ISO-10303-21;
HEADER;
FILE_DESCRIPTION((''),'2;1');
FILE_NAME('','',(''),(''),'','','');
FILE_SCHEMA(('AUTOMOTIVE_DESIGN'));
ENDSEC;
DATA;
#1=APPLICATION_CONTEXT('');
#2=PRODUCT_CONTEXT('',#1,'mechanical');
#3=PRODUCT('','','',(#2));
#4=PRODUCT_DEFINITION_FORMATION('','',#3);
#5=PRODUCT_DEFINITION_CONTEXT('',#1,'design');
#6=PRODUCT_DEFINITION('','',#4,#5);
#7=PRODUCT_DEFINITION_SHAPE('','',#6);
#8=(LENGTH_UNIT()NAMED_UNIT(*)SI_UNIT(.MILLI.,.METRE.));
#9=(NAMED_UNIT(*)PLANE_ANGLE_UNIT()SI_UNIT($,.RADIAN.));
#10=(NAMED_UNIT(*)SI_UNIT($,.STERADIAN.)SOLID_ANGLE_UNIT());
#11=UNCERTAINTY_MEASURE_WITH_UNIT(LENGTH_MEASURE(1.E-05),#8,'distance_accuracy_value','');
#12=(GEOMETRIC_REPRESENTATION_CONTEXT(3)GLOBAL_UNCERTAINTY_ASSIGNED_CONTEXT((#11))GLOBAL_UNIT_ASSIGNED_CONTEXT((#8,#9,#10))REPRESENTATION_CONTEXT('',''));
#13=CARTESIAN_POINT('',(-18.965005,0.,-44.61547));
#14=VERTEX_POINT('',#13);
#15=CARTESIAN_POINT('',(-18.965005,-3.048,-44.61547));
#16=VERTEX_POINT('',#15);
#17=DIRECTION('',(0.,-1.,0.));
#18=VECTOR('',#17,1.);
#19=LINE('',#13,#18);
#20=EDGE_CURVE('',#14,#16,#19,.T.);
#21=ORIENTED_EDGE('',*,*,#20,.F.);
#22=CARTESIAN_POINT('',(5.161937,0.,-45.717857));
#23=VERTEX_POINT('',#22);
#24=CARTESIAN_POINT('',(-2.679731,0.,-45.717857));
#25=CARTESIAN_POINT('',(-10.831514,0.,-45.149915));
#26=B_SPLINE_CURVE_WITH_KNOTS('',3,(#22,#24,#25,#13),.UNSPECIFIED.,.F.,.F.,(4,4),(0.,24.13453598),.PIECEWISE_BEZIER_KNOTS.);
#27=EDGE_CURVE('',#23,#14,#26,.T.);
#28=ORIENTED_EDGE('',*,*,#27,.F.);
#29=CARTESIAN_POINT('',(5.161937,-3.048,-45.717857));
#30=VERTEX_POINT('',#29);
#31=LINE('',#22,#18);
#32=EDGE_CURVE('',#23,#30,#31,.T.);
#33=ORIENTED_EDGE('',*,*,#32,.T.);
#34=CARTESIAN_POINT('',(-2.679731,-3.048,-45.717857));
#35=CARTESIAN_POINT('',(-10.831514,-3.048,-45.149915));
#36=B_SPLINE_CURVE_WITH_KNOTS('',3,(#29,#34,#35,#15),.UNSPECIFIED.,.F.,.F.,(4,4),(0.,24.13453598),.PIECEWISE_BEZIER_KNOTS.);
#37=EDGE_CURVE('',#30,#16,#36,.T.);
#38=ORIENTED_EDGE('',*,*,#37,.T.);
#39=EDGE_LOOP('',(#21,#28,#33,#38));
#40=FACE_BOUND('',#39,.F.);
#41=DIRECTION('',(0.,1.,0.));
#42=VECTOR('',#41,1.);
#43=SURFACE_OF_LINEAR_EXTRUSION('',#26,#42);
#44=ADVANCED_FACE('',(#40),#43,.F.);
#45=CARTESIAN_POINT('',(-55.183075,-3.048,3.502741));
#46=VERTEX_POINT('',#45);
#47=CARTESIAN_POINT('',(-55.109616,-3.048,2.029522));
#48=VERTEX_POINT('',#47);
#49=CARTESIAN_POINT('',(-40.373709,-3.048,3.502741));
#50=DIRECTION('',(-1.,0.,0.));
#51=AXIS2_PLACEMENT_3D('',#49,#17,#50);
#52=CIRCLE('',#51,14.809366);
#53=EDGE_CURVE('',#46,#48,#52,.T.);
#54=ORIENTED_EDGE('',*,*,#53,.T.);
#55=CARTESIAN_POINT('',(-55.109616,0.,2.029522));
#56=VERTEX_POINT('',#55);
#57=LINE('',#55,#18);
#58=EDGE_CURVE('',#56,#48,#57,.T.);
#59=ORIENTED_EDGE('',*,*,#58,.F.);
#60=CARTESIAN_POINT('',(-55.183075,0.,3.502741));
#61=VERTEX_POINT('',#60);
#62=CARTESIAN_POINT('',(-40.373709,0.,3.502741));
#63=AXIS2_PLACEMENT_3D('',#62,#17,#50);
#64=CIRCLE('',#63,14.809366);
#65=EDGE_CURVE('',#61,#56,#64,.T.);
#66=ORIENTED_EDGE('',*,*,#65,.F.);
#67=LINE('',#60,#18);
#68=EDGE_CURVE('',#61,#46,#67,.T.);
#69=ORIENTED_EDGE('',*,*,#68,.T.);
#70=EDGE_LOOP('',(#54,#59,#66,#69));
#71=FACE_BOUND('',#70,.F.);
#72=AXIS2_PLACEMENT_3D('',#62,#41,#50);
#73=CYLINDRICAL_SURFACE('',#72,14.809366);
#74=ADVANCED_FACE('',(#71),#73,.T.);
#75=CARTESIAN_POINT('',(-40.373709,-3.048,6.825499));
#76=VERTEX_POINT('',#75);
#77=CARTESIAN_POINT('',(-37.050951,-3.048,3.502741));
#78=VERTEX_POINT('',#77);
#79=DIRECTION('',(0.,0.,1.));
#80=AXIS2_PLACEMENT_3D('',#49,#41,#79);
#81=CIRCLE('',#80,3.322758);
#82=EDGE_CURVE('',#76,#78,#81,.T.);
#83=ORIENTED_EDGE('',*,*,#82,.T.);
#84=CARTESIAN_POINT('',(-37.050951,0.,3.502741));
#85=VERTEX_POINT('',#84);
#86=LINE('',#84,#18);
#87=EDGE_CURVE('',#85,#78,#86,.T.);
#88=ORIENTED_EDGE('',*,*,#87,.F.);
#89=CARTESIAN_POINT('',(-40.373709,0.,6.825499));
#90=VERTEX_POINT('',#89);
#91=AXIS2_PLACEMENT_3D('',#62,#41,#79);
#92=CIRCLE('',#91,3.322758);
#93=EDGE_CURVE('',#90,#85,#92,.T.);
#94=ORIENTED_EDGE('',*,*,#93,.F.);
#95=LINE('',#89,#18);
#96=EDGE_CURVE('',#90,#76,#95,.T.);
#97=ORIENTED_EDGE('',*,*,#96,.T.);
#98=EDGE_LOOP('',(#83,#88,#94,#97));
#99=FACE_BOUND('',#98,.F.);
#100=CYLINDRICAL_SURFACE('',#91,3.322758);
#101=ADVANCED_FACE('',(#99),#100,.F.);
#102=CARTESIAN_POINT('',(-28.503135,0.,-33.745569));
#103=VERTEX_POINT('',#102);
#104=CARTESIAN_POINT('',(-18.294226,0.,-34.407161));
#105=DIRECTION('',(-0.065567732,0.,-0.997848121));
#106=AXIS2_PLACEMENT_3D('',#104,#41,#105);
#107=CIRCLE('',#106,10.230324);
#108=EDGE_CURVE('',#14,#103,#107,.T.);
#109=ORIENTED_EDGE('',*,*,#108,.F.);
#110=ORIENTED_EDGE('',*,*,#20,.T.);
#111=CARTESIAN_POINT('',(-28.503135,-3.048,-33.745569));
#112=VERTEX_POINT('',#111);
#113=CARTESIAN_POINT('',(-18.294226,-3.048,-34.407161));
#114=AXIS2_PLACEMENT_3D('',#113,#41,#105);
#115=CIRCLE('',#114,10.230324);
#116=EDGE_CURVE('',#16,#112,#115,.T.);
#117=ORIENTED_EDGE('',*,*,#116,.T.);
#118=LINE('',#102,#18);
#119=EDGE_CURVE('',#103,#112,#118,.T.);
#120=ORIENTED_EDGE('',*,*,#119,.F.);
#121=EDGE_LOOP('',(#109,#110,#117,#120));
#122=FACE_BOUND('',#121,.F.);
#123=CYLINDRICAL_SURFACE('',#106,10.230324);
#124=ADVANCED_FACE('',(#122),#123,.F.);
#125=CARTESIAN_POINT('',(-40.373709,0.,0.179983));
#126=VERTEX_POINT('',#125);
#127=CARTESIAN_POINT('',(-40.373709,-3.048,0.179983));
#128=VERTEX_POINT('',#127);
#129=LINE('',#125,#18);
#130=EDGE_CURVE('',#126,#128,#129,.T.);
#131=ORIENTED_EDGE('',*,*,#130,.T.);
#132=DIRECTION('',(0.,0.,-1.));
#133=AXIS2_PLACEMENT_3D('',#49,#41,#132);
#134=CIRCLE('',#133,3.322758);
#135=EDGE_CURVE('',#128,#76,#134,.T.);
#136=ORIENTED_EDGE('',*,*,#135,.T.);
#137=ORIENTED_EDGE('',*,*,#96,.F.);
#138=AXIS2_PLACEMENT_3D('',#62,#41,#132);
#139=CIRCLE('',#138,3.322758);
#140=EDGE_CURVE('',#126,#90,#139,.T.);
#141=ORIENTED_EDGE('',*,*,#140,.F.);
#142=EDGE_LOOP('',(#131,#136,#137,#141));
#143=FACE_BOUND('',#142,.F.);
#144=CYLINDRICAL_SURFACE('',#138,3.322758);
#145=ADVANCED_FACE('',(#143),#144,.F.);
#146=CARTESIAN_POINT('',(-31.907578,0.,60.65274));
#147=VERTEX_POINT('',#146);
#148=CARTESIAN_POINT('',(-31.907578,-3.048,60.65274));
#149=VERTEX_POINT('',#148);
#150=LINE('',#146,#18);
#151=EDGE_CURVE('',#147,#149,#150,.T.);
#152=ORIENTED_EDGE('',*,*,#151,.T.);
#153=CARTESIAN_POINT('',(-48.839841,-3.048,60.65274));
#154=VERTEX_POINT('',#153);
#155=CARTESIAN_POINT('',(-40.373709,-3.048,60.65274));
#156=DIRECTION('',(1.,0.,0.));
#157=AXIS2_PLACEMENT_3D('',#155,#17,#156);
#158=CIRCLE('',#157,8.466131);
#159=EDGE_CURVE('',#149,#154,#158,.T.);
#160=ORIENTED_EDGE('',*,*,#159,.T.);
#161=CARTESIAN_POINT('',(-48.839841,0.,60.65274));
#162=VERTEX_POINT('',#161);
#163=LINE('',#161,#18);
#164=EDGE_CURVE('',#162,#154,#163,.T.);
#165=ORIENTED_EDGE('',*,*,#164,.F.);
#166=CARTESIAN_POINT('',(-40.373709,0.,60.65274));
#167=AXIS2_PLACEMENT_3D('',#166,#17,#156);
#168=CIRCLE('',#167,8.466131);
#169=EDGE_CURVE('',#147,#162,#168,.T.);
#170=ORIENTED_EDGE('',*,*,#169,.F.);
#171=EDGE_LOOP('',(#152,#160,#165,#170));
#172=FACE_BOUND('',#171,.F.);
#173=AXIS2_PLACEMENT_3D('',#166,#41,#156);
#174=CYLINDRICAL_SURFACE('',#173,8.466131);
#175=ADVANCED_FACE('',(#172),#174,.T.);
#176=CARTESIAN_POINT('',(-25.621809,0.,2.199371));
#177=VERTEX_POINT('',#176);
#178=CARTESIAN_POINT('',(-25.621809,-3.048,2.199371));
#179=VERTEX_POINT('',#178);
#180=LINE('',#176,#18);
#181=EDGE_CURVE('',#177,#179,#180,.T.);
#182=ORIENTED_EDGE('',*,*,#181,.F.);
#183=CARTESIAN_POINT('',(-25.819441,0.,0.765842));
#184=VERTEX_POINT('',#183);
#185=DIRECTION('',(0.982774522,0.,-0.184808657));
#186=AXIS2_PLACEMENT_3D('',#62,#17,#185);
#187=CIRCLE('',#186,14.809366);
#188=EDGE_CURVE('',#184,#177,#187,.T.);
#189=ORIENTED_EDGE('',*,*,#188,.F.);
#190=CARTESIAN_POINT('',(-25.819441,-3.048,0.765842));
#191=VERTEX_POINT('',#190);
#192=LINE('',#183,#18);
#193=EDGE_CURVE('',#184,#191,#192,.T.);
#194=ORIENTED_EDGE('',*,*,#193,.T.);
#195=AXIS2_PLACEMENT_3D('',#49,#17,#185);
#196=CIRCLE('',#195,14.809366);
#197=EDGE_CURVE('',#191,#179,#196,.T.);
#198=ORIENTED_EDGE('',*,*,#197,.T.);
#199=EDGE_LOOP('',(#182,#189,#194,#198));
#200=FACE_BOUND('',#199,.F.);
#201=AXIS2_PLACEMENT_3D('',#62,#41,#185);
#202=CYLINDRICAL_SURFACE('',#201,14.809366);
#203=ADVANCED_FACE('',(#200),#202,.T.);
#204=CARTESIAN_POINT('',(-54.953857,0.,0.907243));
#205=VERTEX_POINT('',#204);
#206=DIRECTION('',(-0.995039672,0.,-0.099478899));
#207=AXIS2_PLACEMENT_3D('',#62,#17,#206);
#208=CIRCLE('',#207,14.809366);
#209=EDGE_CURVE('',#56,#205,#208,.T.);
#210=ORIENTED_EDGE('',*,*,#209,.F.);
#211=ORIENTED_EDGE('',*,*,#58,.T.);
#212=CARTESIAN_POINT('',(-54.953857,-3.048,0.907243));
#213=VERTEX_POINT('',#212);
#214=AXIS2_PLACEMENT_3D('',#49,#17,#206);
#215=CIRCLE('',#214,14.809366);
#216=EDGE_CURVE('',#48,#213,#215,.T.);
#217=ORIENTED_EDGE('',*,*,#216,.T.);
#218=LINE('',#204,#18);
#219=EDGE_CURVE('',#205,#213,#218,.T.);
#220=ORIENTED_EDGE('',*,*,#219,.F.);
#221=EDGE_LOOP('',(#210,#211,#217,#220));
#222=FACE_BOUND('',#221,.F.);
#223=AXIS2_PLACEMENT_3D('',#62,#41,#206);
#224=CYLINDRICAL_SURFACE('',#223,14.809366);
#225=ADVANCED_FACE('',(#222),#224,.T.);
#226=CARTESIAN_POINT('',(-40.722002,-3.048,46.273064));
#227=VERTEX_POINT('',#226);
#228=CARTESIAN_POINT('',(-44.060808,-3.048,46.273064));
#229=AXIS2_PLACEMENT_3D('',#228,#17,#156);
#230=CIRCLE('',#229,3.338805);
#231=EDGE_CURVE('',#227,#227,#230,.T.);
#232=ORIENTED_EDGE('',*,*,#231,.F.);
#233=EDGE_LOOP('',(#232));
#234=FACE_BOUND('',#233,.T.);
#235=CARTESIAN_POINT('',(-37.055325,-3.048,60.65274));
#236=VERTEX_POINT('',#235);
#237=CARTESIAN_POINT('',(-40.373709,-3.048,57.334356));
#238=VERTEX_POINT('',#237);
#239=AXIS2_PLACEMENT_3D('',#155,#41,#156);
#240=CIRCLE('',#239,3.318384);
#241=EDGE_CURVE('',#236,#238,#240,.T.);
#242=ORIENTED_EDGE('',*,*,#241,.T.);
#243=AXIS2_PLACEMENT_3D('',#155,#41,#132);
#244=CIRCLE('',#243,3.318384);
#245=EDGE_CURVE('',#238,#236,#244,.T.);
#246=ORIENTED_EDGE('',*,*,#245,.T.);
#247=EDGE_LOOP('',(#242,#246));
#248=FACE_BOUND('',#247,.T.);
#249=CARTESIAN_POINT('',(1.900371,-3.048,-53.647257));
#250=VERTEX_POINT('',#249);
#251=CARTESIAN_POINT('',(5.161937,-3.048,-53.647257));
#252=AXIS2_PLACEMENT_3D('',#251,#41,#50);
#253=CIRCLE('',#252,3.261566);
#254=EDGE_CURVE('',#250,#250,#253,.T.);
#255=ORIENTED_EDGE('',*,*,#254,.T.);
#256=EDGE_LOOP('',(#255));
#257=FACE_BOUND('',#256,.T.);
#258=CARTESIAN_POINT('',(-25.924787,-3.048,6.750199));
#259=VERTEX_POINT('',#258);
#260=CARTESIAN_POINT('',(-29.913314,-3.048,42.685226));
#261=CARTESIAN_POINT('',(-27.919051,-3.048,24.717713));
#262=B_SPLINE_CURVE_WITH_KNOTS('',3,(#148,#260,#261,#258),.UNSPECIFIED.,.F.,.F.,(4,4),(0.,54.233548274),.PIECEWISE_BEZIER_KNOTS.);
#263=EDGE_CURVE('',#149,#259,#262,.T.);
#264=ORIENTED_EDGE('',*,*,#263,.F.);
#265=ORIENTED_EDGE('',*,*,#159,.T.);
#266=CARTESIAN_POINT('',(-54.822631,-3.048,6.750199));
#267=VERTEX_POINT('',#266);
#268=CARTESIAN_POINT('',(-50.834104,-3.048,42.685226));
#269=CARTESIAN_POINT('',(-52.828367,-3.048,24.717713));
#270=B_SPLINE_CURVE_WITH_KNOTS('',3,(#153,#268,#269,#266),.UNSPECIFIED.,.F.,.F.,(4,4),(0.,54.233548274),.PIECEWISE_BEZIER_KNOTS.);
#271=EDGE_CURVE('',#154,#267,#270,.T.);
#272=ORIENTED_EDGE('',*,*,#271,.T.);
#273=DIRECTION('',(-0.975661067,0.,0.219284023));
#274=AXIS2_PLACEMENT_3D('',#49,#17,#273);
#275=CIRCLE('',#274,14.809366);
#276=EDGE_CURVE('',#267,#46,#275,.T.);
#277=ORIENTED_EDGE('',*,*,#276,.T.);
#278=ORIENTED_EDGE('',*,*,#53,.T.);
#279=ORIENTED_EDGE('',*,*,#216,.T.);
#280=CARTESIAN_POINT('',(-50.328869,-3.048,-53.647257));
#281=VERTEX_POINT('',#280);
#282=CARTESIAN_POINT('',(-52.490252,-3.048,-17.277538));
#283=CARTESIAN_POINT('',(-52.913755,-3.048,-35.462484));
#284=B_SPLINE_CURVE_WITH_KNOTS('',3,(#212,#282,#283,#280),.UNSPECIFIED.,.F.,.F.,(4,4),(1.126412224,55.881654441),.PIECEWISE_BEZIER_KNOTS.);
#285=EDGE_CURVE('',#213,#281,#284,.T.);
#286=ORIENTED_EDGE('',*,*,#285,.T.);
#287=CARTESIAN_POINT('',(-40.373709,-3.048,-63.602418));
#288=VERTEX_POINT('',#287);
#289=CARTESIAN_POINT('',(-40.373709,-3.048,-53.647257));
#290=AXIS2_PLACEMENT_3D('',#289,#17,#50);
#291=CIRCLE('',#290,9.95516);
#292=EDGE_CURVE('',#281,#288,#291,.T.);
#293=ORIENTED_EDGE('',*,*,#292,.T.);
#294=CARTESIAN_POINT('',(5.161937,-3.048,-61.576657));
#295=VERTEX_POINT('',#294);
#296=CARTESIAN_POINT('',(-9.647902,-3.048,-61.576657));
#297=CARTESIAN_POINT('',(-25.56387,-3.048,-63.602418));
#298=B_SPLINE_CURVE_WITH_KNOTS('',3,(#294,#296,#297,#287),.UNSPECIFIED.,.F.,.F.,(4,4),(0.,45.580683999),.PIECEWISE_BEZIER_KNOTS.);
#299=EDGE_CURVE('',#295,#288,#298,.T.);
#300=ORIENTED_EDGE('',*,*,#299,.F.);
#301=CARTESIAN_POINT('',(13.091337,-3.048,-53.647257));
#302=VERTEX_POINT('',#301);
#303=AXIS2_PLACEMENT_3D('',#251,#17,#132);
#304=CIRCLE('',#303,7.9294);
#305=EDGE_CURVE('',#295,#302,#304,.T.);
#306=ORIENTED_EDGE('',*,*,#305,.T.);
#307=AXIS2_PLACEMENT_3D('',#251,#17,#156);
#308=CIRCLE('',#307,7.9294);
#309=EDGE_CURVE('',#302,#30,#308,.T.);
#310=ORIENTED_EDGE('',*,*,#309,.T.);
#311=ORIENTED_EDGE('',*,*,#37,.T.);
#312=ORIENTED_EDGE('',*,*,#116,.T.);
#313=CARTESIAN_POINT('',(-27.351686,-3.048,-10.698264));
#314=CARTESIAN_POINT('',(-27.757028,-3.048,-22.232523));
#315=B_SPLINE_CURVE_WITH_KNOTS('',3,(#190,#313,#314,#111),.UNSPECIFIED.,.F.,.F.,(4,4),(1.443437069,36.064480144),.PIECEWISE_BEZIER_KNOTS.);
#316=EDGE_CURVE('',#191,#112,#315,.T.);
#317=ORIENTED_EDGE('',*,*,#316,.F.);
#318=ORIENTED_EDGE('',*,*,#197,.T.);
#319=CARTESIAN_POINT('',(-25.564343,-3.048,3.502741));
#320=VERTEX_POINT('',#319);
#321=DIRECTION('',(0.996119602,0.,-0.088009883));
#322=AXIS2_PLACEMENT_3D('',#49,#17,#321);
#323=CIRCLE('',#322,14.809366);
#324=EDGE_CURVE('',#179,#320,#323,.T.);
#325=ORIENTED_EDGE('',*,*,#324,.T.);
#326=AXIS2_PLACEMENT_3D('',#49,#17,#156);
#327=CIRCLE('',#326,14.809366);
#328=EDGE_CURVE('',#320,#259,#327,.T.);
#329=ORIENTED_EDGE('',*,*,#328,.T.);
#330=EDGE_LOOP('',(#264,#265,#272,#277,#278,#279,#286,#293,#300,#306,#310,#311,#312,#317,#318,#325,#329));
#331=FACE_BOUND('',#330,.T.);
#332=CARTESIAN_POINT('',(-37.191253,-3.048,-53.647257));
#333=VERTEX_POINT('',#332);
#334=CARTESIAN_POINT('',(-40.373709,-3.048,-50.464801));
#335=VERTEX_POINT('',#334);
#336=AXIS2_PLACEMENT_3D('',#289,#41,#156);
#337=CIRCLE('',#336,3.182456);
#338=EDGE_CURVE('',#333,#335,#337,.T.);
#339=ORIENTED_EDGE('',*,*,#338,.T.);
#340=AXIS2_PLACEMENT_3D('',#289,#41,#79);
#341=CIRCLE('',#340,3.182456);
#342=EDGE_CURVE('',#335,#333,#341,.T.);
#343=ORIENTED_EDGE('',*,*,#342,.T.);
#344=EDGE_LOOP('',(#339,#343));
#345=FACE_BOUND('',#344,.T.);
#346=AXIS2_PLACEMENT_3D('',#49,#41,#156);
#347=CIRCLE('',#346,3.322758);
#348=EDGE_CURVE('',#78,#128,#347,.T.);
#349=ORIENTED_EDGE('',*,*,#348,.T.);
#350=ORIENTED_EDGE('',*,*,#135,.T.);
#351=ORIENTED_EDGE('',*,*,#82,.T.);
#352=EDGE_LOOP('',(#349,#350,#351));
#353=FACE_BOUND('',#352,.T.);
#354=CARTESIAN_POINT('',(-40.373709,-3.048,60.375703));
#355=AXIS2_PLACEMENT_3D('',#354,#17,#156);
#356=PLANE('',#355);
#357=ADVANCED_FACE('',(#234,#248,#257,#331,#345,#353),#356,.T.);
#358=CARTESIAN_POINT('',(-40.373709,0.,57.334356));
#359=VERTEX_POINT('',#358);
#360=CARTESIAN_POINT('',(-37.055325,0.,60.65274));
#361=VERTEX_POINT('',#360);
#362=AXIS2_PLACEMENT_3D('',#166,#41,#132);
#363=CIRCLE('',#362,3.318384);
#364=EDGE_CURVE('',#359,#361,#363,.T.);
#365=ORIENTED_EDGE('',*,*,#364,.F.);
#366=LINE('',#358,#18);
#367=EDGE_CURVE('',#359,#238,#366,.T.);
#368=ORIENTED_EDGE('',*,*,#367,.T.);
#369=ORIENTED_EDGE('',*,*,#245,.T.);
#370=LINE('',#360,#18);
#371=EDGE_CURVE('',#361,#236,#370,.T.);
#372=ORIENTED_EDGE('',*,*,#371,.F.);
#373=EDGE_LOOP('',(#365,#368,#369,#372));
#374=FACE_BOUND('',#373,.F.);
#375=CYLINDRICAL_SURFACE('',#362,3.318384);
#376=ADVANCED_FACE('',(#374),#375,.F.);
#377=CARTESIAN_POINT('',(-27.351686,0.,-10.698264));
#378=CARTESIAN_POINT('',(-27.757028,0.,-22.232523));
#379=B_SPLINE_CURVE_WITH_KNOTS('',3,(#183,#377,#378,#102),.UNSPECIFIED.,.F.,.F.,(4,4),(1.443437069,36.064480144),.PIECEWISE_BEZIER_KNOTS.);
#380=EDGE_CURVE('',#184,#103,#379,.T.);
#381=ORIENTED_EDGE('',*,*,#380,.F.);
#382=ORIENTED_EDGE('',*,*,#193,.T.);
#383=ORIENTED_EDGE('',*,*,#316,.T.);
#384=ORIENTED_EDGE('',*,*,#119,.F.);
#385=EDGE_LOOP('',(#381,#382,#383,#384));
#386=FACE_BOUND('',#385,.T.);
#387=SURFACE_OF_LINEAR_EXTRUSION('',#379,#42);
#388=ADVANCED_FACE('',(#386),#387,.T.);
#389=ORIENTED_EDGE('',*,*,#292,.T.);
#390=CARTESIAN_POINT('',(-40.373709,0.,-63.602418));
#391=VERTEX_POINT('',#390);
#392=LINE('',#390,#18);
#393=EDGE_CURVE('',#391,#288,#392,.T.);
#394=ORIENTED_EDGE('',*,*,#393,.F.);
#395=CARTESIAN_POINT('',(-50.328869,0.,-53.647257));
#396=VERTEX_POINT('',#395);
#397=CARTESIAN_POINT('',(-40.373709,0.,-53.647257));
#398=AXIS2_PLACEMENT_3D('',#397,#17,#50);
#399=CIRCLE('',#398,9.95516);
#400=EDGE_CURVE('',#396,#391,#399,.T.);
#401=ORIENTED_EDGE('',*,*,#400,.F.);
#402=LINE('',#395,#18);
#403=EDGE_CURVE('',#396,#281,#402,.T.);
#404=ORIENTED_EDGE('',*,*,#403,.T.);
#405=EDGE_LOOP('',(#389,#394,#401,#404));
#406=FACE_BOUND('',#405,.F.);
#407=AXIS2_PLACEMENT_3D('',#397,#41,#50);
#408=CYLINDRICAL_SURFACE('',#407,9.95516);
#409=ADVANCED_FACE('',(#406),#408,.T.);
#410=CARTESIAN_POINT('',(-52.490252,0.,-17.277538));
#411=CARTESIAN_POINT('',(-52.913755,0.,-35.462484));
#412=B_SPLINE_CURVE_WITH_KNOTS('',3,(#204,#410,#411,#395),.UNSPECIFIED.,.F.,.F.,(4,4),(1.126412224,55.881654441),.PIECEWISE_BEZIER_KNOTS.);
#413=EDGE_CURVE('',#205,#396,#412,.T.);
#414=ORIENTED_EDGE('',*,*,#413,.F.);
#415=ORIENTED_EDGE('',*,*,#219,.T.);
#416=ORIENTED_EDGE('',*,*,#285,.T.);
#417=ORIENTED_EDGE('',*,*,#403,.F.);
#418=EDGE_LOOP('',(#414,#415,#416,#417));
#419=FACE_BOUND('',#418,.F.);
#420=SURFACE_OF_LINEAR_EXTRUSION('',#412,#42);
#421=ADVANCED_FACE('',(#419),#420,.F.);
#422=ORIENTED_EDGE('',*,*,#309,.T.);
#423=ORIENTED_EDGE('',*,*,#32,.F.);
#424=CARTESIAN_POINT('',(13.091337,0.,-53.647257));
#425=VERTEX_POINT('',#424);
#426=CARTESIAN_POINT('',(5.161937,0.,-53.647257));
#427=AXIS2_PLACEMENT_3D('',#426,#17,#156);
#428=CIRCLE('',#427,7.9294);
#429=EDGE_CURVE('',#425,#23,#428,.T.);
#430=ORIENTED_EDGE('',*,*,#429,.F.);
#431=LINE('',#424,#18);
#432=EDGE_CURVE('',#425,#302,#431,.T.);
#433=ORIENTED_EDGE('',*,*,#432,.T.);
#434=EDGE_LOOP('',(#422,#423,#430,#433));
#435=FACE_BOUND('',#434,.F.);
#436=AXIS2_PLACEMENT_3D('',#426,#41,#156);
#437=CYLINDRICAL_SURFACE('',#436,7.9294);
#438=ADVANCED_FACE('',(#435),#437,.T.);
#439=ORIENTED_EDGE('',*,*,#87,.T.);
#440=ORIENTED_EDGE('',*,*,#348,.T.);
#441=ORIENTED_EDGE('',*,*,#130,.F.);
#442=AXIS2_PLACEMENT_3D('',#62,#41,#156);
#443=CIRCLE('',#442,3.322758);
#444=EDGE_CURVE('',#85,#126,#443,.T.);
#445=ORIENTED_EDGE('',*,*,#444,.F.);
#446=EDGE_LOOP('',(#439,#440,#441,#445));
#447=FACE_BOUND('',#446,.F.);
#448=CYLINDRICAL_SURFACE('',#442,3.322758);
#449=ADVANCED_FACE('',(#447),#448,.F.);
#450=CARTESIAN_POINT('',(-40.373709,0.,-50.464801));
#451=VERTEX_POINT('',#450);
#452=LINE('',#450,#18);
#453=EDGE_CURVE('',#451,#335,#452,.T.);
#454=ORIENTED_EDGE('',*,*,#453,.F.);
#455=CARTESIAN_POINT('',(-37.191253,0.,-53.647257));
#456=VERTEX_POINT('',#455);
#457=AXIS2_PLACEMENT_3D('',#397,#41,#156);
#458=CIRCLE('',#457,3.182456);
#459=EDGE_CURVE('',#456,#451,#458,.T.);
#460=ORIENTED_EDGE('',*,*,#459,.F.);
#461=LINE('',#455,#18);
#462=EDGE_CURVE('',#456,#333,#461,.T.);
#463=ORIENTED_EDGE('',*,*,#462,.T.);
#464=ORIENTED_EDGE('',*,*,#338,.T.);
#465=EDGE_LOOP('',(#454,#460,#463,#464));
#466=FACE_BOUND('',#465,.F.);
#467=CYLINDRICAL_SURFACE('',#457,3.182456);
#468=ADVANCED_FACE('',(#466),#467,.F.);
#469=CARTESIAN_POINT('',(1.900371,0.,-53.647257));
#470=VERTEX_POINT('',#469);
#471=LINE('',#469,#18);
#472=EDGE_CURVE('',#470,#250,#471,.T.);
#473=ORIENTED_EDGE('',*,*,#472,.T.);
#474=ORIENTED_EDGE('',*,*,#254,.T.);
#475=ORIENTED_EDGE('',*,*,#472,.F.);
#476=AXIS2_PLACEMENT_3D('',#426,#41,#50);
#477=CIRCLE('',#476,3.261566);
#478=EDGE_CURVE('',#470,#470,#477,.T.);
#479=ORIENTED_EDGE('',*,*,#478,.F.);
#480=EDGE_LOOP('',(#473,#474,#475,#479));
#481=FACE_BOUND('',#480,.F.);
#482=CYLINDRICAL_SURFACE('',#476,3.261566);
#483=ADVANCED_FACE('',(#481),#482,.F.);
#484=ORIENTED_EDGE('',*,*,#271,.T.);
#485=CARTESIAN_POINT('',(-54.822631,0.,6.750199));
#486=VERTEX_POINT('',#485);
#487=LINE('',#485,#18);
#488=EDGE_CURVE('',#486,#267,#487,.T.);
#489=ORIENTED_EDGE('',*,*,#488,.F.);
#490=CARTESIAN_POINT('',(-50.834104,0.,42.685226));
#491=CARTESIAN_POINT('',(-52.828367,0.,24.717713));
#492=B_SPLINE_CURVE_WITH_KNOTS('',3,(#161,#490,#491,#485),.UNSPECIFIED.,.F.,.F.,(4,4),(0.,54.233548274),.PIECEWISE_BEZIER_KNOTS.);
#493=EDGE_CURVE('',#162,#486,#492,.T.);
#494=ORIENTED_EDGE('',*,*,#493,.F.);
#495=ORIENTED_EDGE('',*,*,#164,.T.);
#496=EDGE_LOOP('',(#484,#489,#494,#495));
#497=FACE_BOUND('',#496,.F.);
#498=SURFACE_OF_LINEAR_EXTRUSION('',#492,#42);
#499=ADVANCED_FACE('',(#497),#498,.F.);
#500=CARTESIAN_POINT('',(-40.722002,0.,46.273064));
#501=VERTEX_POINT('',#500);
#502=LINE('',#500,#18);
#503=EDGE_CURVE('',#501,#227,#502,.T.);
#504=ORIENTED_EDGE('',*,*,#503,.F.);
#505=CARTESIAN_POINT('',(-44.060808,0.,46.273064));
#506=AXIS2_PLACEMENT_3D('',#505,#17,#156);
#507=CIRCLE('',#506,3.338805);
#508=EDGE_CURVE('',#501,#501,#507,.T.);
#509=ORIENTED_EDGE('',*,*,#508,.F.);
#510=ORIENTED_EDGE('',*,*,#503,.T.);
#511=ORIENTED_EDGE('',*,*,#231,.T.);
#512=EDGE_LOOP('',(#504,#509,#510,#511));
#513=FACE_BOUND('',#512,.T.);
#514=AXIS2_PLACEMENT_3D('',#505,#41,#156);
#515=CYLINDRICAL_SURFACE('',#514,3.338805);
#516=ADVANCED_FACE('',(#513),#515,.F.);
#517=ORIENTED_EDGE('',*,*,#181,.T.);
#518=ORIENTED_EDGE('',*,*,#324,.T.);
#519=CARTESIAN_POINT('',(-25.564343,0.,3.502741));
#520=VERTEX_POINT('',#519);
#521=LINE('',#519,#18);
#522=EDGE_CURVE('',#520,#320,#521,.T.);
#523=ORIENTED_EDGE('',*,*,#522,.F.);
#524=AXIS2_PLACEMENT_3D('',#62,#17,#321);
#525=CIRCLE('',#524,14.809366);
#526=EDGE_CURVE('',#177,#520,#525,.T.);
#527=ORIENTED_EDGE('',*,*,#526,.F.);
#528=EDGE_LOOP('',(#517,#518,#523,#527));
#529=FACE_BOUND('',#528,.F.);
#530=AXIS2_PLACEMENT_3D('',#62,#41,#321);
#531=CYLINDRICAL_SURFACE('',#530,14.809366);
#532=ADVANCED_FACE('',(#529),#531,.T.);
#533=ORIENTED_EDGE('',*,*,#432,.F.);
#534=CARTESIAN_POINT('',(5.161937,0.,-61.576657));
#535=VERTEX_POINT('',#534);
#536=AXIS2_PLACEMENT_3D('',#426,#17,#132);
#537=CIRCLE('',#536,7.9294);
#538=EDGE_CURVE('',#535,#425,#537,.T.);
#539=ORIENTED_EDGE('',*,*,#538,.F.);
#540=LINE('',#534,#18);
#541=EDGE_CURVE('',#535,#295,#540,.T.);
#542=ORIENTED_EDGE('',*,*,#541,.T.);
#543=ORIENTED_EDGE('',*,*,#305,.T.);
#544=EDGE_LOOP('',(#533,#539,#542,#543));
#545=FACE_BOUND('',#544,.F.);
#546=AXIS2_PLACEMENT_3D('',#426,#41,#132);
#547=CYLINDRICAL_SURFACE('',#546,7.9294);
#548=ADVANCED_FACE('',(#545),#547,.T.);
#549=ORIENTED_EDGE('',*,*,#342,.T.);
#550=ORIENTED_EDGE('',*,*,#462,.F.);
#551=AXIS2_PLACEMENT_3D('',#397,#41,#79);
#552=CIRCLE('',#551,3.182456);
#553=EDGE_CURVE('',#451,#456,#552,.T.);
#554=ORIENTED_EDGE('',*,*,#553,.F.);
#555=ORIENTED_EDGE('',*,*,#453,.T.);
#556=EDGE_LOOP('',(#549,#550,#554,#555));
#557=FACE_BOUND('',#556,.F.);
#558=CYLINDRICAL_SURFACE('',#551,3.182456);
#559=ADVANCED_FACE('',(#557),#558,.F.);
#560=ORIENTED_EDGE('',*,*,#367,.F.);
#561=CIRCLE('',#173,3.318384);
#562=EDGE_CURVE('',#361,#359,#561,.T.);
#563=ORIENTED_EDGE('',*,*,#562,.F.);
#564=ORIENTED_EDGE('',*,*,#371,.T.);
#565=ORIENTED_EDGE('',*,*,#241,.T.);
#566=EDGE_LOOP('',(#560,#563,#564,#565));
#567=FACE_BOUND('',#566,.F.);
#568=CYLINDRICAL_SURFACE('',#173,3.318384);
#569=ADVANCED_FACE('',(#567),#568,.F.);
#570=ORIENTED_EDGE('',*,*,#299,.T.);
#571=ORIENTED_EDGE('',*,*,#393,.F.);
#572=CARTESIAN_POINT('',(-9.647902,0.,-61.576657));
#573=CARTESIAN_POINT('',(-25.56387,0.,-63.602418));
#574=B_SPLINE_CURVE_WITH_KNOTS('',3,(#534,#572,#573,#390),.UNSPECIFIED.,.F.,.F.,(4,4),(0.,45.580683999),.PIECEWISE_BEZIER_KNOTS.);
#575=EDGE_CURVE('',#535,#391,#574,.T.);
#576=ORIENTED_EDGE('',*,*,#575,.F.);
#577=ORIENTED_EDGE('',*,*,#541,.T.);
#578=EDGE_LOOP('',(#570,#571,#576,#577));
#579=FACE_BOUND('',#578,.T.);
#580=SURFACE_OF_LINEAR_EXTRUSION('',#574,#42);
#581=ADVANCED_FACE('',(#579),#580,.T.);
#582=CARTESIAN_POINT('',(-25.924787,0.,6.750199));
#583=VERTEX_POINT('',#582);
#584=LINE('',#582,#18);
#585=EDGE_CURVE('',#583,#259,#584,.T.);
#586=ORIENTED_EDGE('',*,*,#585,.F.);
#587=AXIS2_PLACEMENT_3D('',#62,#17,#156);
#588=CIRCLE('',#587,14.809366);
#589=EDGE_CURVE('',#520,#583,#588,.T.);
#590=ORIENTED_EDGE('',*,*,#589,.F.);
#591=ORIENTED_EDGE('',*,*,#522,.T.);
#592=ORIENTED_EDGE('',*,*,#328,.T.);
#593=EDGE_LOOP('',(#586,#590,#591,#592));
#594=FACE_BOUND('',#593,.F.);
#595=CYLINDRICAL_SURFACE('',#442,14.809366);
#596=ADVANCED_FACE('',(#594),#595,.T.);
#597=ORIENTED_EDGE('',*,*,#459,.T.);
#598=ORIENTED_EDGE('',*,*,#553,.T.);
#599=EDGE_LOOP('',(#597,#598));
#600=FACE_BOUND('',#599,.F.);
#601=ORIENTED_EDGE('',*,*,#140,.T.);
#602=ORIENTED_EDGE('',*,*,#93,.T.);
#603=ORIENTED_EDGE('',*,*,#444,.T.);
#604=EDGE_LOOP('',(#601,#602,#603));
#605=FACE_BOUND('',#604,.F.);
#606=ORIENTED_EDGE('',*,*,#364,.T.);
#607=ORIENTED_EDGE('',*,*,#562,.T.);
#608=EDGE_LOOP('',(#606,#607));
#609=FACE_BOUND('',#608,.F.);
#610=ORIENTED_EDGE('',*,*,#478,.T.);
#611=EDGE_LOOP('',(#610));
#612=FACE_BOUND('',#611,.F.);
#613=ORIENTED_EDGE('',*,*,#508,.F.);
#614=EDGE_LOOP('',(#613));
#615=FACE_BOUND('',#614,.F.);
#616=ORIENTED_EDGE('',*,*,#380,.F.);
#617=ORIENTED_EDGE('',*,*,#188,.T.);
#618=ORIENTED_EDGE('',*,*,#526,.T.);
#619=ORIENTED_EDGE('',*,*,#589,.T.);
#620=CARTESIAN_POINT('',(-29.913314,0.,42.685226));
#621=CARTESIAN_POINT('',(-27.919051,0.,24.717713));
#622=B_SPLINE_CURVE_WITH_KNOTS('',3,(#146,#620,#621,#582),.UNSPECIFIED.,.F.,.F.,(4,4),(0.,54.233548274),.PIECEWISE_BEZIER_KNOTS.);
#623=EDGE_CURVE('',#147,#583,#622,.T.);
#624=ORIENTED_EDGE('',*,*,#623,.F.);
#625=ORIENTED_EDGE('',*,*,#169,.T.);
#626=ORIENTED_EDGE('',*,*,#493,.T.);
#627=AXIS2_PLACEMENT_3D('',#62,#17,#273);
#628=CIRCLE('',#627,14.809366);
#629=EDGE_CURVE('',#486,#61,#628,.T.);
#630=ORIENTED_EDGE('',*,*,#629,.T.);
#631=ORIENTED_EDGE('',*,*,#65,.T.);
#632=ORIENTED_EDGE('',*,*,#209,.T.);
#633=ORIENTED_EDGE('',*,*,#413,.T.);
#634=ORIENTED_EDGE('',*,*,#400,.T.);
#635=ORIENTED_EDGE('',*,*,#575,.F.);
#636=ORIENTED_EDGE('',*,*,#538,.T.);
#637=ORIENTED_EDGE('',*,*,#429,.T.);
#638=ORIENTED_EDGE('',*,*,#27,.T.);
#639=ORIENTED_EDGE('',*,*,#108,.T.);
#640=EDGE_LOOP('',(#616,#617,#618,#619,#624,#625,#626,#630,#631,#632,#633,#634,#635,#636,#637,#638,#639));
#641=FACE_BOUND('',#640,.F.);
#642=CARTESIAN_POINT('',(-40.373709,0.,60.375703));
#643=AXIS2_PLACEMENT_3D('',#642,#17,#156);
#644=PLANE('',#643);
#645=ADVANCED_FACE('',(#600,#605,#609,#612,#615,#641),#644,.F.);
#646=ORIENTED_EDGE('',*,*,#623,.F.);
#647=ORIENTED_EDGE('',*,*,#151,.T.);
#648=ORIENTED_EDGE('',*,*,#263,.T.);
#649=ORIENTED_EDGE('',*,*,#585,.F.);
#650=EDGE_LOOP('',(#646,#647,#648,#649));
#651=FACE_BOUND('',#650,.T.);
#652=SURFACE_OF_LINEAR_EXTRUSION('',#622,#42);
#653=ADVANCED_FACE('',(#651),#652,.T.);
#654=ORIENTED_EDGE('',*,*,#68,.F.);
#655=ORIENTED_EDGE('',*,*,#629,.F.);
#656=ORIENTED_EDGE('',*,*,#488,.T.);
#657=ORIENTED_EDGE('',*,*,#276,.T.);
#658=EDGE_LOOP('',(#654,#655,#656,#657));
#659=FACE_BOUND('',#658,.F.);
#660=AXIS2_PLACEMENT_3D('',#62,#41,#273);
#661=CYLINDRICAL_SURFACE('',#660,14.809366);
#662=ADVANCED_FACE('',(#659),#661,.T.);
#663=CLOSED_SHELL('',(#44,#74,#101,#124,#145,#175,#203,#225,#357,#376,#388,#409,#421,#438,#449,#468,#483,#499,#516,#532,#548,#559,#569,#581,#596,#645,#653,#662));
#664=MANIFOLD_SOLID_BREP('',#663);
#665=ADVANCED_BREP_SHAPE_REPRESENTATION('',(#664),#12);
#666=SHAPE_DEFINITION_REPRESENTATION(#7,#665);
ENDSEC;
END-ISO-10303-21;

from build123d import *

# Parameters (mm, degrees)
F0_R     = 3.338805446
F1_DEPTH = 3.048


with BuildPart() as f1:
    # F0 (on Front) → F1 (new body)
    with BuildSketch(Plane.XZ):
        with BuildLine():
            ThreePointArc((-48.8398405267, 60.6527402997), (-46.3601680284, 54.6662813241), (-40.3737090528, 52.1866088258))
            ThreePointArc((-40.3737090528, 52.1866088258), (-34.3872500772, 54.6662813241), (-31.9075775789, 60.6527402997))
            ThreePointArc((-31.9075775789, 60.6527402997), (-40.3737090528, 69.1188717736), (-48.8398405267, 60.6527402997))
        make_face()
        with BuildLine():
            ThreePointArc((-37.0553247631, 60.6527402997), (-38.0272570189, 58.3062882658), (-40.3737090528, 57.33435601))
            ThreePointArc((-40.3737090528, 57.33435601), (-42.7201610867, 62.9991923336), (-37.0553247631, 60.6527402997))
        make_face(mode=Mode.SUBTRACT)
        with BuildLine():
            ThreePointArc((-31.9075775789, 60.6527402997), (-34.3872500772, 54.6662813241), (-40.3737090528, 52.1866088258))
            Line((-40.3737090528, 52.1866088258), (-40.3737090528, 18.3121075428))
            ThreePointArc((-40.3737090528, 18.3121075428), (-31.1210192063, 15.0658316355), (-25.9247871381, 6.75019883))
            add(Edge.make_bspline(
                [(-31.9075775789, 60.6527402997), (-29.9133140986, 42.6852264765), (-27.9190506183, 24.7177126532), (-25.9247871381, 6.75019883)],
                knots=[0, 0, 0, 0, 54.2335482737, 54.2335482737, 54.2335482737, 54.2335482737], degree=3))
        make_face()
        with BuildLine():
            Line((-40.3737090528, 18.3121075428), (-40.3737090528, 52.1866088258))
            ThreePointArc((-40.3737090528, 52.1866088258), (-46.3601680284, 54.6662813241), (-48.8398405267, 60.6527402997))
            add(Edge.make_bspline(
                [(-48.8398405267, 60.6527402997), (-50.834104007, 42.6852264765), (-52.8283674873, 24.7177126532), (-54.8226309675, 6.75019883)],
                knots=[0, 0, 0, 0, 54.2335482737, 54.2335482737, 54.2335482737, 54.2335482737], degree=3))
            ThreePointArc((-54.8226309675, 6.75019883), (-49.6263988993, 15.0658316355), (-40.3737090528, 18.3121075428))
        make_face()
        with Locations((-44.0608076751, 46.2730638683)):
            Circle(F0_R, mode=Mode.SUBTRACT)
        with BuildLine():
            ThreePointArc((-25.9247871381, 6.75019883), (-31.1210192063, 15.0658316355), (-40.3737090528, 18.3121075428))
            Line((-40.3737090528, 18.3121075428), (-40.3737090528, 6.825499461))
            ThreePointArc((-40.3737090528, 6.825499461), (-38.0241643353, 5.8522861736), (-37.0509510478, 3.502741456))
            ThreePointArc((-37.0509510478, 3.502741456), (-38.0241643353, 1.1531967385), (-40.3737090528, 0.1799834511))
            Line((-40.3737090528, 0.1799834511), (-40.3737090528, -11.3066246308))
            ThreePointArc((-40.3737090528, -11.3066246308), (-30.9189329127, -7.8957028253), (-25.8194413828, 0.7658423924))
            add(Edge.make_bspline(
                [(-25.6218092077, 2.199370882), (-25.689716363, 1.7216544124), (-25.7555582996, 1.2438093753), (-25.8194413828, 0.7658423924)],
                knots=[0, 0, 0, 0, 1.4434370692, 1.4434370692, 1.4434370692, 1.4434370692], degree=3))
            ThreePointArc((-25.6218092077, 2.199370882), (-25.5787165017, 2.850423048), (-25.564342966, 3.502741456))
            add(Edge.make_bspline(
                [(-25.9247871381, 6.75019883), (-25.8046390807, 5.6677130387), (-25.6844910233, 4.5852272473), (-25.564342966, 3.502741456)],
                knots=[54.2335482737, 54.2335482737, 54.2335482737, 54.2335482737, 57.500947759, 57.500947759, 57.500947759, 57.500947759], degree=3))
        make_face()
        with BuildLine():
            Line((-40.3737090528, 6.825499461), (-40.3737090528, 18.3121075428))
            ThreePointArc((-40.3737090528, 18.3121075428), (-49.6263988993, 15.0658316355), (-54.8226309675, 6.75019883))
            add(Edge.make_bspline(
                [(-54.8226309675, 6.75019883), (-54.9427790249, 5.6677130387), (-55.0629270823, 4.5852272473), (-55.1830751396, 3.502741456)],
                knots=[54.2335482737, 54.2335482737, 54.2335482737, 54.2335482737, 57.500947759, 57.500947759, 57.500947759, 57.500947759], degree=3))
            ThreePointArc((-55.1830751396, 3.502741456), (-55.16469891, 2.7652165843), (-55.1096158257, 2.0295220307))
            add(Edge.make_bspline(
                [(-55.1096158257, 2.0295220307), (-55.0564401475, 1.6554290587), (-55.0045376129, 1.2813360137), (-54.9538568961, 0.9072428986)],
                knots=[0, 0, 0, 0, 1.1264122236, 1.1264122236, 1.1264122236, 1.1264122236], degree=3))
            ThreePointArc((-54.9538568961, 0.9072428986), (-49.8836942152, -7.8496814617), (-40.3737090528, -11.3066246308))
            Line((-40.3737090528, -11.3066246308), (-40.3737090528, 0.1799834511))
            ThreePointArc((-40.3737090528, 0.1799834511), (-43.6964670578, 3.502741456), (-40.3737090528, 6.825499461))
        make_face()
        with BuildLine():
            ThreePointArc((-25.564342966, 3.502741456), (-25.6547298408, 5.1364411987), (-25.9247871381, 6.75019883))
            add(Edge.make_bspline(
                [(-25.9247871381, 6.75019883), (-25.8046390807, 5.6677130387), (-25.6844910233, 4.5852272473), (-25.564342966, 3.502741456)],
                knots=[54.2335482737, 54.2335482737, 54.2335482737, 54.2335482737, 57.500947759, 57.500947759, 57.500947759, 57.500947759], degree=3))
        make_face()
        with BuildLine():
            add(Edge.make_bspline(
                [(-54.8226309675, 6.75019883), (-54.9427790249, 5.6677130387), (-55.0629270823, 4.5852272473), (-55.1830751396, 3.502741456)],
                knots=[54.2335482737, 54.2335482737, 54.2335482737, 54.2335482737, 57.500947759, 57.500947759, 57.500947759, 57.500947759], degree=3))
            ThreePointArc((-54.8226309675, 6.75019883), (-55.0926882648, 5.1364411987), (-55.1830751396, 3.502741456))
        make_face()
        with BuildLine():
            ThreePointArc((-25.8194413828, 0.7658423924), (-30.9189329127, -7.8957028253), (-40.3737090528, -11.3066246308))
            Line((-40.3737090528, -11.3066246308), (-40.3737090528, -43.6920970678))
            add(Edge.make_bspline(
                [(-29.2968091513, -43.9985364744), (-33.0339667691, -43.8142378214), (-36.7371842262, -43.69209709), (-40.3737090528, -43.6920970678)],
                knots=[34.3884430891, 34.3884430891, 34.3884430891, 34.3884430891, 45.5806839994, 45.5806839994, 45.5806839994, 45.5806839994], degree=3))
            add(Edge.make_bspline(
                [(-28.5031349311, -33.745569321), (-28.7247903418, -37.1658958874), (-28.9765210206, -40.5843501576), (-29.2968091568, -43.9985364736)],
                knots=[36.0644801438, 36.0644801438, 36.0644801438, 36.0644801438, 46.3497924724, 46.3497924724, 46.3497924724, 46.3497924724], degree=3))
            add(Edge.make_bspline(
                [(-25.8194413828, 0.7658423924), (-27.3516862062, -10.698263565), (-27.7570281259, -22.2325233774), (-28.5031349311, -33.745569321)],
                knots=[1.4434370692, 1.4434370692, 1.4434370692, 1.4434370692, 36.0644801438, 36.0644801438, 36.0644801438, 36.0644801438], degree=3))
        make_face()
        with BuildLine():
            Line((-40.3737090528, -43.6920970678), (-40.3737090528, -11.3066246308))
            ThreePointArc((-40.3737090528, -11.3066246308), (-49.8836942152, -7.8496814617), (-54.9538568961, 0.9072428986))
            add(Edge.make_bspline(
                [(-54.9538568961, 0.9072428986), (-52.4902517713, -17.2775376799), (-52.9137553274, -35.4624837616), (-50.3288693726, -53.6472573876)],
                knots=[1.1264122236, 1.1264122236, 1.1264122236, 1.1264122236, 55.8816544409, 55.8816544409, 55.8816544409, 55.8816544409], degree=3))
            ThreePointArc((-50.3288693726, -53.6472573876), (-47.4130704227, -46.6078960177), (-40.3737090528, -43.6920970678))
        make_face()
        with BuildLine():
            ThreePointArc((-25.8194413828, 0.7658423924), (-25.703105296, 1.4801912576), (-25.6218092077, 2.199370882))
            add(Edge.make_bspline(
                [(-25.6218092077, 2.199370882), (-25.689716363, 1.7216544124), (-25.7555582996, 1.2438093753), (-25.8194413828, 0.7658423924)],
                knots=[0, 0, 0, 0, 1.4434370692, 1.4434370692, 1.4434370692, 1.4434370692], degree=3))
        make_face()
        with BuildLine():
            add(Edge.make_bspline(
                [(-55.1096158257, 2.0295220307), (-55.0564401475, 1.6554290587), (-55.0045376129, 1.2813360137), (-54.9538568961, 0.9072428986)],
                knots=[0, 0, 0, 0, 1.1264122236, 1.1264122236, 1.1264122236, 1.1264122236], degree=3))
            ThreePointArc((-55.1096158257, 2.0295220307), (-55.0424732194, 1.466892317), (-54.9538568961, 0.9072428986))
        make_face()
        with BuildLine():
            ThreePointArc((-30.418548733, -53.6472573876), (-33.3343476829, -46.6078960177), (-40.3737090528, -43.6920970678))
            Line((-40.3737090528, -43.6920970678), (-40.3737090528, -50.4648009147))
            ThreePointArc((-40.3737090528, -50.4648009147), (-38.1233724999, -51.3969208348), (-37.1912525798, -53.6472573876))
            Line((-37.1912525798, -53.6472573876), (-30.418548733, -53.6472573876))
        make_face()
        with BuildLine():
            add(Edge.make_bspline(
                [(-29.2968091513, -43.9985364744), (-33.0339667691, -43.8142378214), (-36.7371842262, -43.69209709), (-40.3737090528, -43.6920970678)],
                knots=[34.3884430891, 34.3884430891, 34.3884430891, 34.3884430891, 45.5806839994, 45.5806839994, 45.5806839994, 45.5806839994], degree=3))
            ThreePointArc((-40.3737090528, -43.6920970678), (-33.3343476829, -46.6078960177), (-30.418548733, -53.6472573876))
            add(Edge.make_bspline(
                [(-29.2968091568, -43.9985364736), (-29.5989469592, -47.2192450606), (-29.9620922477, -50.4361557069), (-30.418548733, -53.6472573876)],
                knots=[46.3497924724, 46.3497924724, 46.3497924724, 46.3497924724, 56.0522488324, 56.0522488324, 56.0522488324, 56.0522488324], degree=3))
        make_face()
        with BuildLine():
            Line((-40.3737090528, -50.4648009147), (-40.3737090528, -43.6920970678))
            ThreePointArc((-40.3737090528, -43.6920970678), (-47.4130704227, -46.6078960177), (-50.3288693726, -53.6472573876))
            ThreePointArc((-50.3288693726, -53.6472573876), (-47.4130704227, -60.6866187576), (-40.3737090528, -63.6024177074))
            ThreePointArc((-40.3737090528, -63.6024177074), (-33.3343476829, -60.6866187576), (-30.418548733, -53.6472573876))
            Line((-30.418548733, -53.6472573876), (-37.1912525798, -53.6472573876))
            ThreePointArc((-37.1912525798, -53.6472573876), (-42.6240456057, -55.8975939405), (-40.3737090528, -50.4648009147))
        make_face()
        with BuildLine():
            Line((-2.7674630824, -53.6472573876), (-30.418548733, -53.6472573876))
            ThreePointArc((-30.418548733, -53.6472573876), (-33.3343476829, -60.6866187576), (-40.3737090528, -63.6024177074))
            add(Edge.make_bspline(
                [(5.1619368605, -61.5766573305), (-9.6479024117, -61.5766574207), (-25.5638697806, -63.6024176172), (-40.3737090528, -63.6024177074)],
                knots=[0, 0, 0, 0, 45.5806839994, 45.5806839994, 45.5806839994, 45.5806839994], degree=3))
            ThreePointArc((5.1619368605, -61.5766573305), (-0.4449956098, -59.254189858), (-2.7674630824, -53.6472573876))
        make_face()
        with BuildLine():
            add(Edge.make_bspline(
                [(-29.2968091568, -43.9985364736), (-29.5989469592, -47.2192450606), (-29.9620922477, -50.4361557069), (-30.418548733, -53.6472573876)],
                knots=[46.3497924724, 46.3497924724, 46.3497924724, 46.3497924724, 56.0522488324, 56.0522488324, 56.0522488324, 56.0522488324], degree=3))
            Line((-30.418548733, -53.6472573876), (-2.7674630824, -53.6472573876))
            ThreePointArc((-2.7674630824, -53.6472573876), (-0.4449956098, -48.0403249173), (5.1619368605, -45.7178574448))
            add(Edge.make_bspline(
                [(5.1619368605, -45.7178574448), (-2.6797313071, -45.717857397), (-10.8315136759, -45.1499150115), (-18.9650052423, -44.6154703537)],
                knots=[0, 0, 0, 0, 24.1345359803, 24.1345359803, 24.1345359803, 24.1345359803], degree=3))
            add(Edge.make_bspline(
                [(-18.9650052423, -44.6154703537), (-22.4206369172, -44.3884038014), (-25.8729669225, -44.1673839182), (-29.2968091513, -43.9985364744)],
                knots=[24.1345359803, 24.1345359803, 24.1345359803, 24.1345359803, 34.3884430891, 34.3884430891, 34.3884430891, 34.3884430891], degree=3))
        make_face()
        with BuildLine():
            add(Edge.make_bspline(
                [(-28.5031349311, -33.745569321), (-28.7247903418, -37.1658958874), (-28.9765210206, -40.5843501576), (-29.2968091568, -43.9985364736)],
                knots=[36.0644801438, 36.0644801438, 36.0644801438, 36.0644801438, 46.3497924724, 46.3497924724, 46.3497924724, 46.3497924724], degree=3))
            add(Edge.make_bspline(
                [(-18.9650052423, -44.6154703537), (-22.4206369172, -44.3884038014), (-25.8729669225, -44.1673839182), (-29.2968091513, -43.9985364744)],
                knots=[24.1345359803, 24.1345359803, 24.1345359803, 24.1345359803, 34.3884430891, 34.3884430891, 34.3884430891, 34.3884430891], degree=3))
            ThreePointArc((-18.9650052423, -44.6154703537), (-25.9838678208, -41.1546742014), (-28.5031349311, -33.745569321))
        make_face()
        with BuildLine():
            ThreePointArc((5.1619368605, -45.7178574448), (-0.4449956098, -48.0403249173), (-2.7674630824, -53.6472573876))
            ThreePointArc((-2.7674630824, -53.6472573876), (-0.4449956098, -59.254189858), (5.1619368605, -61.5766573305))
            ThreePointArc((5.1619368605, -61.5766573305), (10.7688693309, -59.254189858), (13.0913368034, -53.6472573876))
            ThreePointArc((13.0913368034, -53.6472573876), (10.7688693309, -48.0403249173), (5.1619368605, -45.7178574448))
        make_face()
        with BuildLine():
            ThreePointArc((8.4235029173, -53.6472573876), (5.1619368605, -56.9088234444), (1.9003708038, -53.6472573876))
            ThreePointArc((1.9003708038, -53.6472573876), (5.1619368605, -50.3856913309), (8.4235029173, -53.6472573876))
        make_face(mode=Mode.SUBTRACT)
    extrude(amount=F1_DEPTH)


solid = f1.part
